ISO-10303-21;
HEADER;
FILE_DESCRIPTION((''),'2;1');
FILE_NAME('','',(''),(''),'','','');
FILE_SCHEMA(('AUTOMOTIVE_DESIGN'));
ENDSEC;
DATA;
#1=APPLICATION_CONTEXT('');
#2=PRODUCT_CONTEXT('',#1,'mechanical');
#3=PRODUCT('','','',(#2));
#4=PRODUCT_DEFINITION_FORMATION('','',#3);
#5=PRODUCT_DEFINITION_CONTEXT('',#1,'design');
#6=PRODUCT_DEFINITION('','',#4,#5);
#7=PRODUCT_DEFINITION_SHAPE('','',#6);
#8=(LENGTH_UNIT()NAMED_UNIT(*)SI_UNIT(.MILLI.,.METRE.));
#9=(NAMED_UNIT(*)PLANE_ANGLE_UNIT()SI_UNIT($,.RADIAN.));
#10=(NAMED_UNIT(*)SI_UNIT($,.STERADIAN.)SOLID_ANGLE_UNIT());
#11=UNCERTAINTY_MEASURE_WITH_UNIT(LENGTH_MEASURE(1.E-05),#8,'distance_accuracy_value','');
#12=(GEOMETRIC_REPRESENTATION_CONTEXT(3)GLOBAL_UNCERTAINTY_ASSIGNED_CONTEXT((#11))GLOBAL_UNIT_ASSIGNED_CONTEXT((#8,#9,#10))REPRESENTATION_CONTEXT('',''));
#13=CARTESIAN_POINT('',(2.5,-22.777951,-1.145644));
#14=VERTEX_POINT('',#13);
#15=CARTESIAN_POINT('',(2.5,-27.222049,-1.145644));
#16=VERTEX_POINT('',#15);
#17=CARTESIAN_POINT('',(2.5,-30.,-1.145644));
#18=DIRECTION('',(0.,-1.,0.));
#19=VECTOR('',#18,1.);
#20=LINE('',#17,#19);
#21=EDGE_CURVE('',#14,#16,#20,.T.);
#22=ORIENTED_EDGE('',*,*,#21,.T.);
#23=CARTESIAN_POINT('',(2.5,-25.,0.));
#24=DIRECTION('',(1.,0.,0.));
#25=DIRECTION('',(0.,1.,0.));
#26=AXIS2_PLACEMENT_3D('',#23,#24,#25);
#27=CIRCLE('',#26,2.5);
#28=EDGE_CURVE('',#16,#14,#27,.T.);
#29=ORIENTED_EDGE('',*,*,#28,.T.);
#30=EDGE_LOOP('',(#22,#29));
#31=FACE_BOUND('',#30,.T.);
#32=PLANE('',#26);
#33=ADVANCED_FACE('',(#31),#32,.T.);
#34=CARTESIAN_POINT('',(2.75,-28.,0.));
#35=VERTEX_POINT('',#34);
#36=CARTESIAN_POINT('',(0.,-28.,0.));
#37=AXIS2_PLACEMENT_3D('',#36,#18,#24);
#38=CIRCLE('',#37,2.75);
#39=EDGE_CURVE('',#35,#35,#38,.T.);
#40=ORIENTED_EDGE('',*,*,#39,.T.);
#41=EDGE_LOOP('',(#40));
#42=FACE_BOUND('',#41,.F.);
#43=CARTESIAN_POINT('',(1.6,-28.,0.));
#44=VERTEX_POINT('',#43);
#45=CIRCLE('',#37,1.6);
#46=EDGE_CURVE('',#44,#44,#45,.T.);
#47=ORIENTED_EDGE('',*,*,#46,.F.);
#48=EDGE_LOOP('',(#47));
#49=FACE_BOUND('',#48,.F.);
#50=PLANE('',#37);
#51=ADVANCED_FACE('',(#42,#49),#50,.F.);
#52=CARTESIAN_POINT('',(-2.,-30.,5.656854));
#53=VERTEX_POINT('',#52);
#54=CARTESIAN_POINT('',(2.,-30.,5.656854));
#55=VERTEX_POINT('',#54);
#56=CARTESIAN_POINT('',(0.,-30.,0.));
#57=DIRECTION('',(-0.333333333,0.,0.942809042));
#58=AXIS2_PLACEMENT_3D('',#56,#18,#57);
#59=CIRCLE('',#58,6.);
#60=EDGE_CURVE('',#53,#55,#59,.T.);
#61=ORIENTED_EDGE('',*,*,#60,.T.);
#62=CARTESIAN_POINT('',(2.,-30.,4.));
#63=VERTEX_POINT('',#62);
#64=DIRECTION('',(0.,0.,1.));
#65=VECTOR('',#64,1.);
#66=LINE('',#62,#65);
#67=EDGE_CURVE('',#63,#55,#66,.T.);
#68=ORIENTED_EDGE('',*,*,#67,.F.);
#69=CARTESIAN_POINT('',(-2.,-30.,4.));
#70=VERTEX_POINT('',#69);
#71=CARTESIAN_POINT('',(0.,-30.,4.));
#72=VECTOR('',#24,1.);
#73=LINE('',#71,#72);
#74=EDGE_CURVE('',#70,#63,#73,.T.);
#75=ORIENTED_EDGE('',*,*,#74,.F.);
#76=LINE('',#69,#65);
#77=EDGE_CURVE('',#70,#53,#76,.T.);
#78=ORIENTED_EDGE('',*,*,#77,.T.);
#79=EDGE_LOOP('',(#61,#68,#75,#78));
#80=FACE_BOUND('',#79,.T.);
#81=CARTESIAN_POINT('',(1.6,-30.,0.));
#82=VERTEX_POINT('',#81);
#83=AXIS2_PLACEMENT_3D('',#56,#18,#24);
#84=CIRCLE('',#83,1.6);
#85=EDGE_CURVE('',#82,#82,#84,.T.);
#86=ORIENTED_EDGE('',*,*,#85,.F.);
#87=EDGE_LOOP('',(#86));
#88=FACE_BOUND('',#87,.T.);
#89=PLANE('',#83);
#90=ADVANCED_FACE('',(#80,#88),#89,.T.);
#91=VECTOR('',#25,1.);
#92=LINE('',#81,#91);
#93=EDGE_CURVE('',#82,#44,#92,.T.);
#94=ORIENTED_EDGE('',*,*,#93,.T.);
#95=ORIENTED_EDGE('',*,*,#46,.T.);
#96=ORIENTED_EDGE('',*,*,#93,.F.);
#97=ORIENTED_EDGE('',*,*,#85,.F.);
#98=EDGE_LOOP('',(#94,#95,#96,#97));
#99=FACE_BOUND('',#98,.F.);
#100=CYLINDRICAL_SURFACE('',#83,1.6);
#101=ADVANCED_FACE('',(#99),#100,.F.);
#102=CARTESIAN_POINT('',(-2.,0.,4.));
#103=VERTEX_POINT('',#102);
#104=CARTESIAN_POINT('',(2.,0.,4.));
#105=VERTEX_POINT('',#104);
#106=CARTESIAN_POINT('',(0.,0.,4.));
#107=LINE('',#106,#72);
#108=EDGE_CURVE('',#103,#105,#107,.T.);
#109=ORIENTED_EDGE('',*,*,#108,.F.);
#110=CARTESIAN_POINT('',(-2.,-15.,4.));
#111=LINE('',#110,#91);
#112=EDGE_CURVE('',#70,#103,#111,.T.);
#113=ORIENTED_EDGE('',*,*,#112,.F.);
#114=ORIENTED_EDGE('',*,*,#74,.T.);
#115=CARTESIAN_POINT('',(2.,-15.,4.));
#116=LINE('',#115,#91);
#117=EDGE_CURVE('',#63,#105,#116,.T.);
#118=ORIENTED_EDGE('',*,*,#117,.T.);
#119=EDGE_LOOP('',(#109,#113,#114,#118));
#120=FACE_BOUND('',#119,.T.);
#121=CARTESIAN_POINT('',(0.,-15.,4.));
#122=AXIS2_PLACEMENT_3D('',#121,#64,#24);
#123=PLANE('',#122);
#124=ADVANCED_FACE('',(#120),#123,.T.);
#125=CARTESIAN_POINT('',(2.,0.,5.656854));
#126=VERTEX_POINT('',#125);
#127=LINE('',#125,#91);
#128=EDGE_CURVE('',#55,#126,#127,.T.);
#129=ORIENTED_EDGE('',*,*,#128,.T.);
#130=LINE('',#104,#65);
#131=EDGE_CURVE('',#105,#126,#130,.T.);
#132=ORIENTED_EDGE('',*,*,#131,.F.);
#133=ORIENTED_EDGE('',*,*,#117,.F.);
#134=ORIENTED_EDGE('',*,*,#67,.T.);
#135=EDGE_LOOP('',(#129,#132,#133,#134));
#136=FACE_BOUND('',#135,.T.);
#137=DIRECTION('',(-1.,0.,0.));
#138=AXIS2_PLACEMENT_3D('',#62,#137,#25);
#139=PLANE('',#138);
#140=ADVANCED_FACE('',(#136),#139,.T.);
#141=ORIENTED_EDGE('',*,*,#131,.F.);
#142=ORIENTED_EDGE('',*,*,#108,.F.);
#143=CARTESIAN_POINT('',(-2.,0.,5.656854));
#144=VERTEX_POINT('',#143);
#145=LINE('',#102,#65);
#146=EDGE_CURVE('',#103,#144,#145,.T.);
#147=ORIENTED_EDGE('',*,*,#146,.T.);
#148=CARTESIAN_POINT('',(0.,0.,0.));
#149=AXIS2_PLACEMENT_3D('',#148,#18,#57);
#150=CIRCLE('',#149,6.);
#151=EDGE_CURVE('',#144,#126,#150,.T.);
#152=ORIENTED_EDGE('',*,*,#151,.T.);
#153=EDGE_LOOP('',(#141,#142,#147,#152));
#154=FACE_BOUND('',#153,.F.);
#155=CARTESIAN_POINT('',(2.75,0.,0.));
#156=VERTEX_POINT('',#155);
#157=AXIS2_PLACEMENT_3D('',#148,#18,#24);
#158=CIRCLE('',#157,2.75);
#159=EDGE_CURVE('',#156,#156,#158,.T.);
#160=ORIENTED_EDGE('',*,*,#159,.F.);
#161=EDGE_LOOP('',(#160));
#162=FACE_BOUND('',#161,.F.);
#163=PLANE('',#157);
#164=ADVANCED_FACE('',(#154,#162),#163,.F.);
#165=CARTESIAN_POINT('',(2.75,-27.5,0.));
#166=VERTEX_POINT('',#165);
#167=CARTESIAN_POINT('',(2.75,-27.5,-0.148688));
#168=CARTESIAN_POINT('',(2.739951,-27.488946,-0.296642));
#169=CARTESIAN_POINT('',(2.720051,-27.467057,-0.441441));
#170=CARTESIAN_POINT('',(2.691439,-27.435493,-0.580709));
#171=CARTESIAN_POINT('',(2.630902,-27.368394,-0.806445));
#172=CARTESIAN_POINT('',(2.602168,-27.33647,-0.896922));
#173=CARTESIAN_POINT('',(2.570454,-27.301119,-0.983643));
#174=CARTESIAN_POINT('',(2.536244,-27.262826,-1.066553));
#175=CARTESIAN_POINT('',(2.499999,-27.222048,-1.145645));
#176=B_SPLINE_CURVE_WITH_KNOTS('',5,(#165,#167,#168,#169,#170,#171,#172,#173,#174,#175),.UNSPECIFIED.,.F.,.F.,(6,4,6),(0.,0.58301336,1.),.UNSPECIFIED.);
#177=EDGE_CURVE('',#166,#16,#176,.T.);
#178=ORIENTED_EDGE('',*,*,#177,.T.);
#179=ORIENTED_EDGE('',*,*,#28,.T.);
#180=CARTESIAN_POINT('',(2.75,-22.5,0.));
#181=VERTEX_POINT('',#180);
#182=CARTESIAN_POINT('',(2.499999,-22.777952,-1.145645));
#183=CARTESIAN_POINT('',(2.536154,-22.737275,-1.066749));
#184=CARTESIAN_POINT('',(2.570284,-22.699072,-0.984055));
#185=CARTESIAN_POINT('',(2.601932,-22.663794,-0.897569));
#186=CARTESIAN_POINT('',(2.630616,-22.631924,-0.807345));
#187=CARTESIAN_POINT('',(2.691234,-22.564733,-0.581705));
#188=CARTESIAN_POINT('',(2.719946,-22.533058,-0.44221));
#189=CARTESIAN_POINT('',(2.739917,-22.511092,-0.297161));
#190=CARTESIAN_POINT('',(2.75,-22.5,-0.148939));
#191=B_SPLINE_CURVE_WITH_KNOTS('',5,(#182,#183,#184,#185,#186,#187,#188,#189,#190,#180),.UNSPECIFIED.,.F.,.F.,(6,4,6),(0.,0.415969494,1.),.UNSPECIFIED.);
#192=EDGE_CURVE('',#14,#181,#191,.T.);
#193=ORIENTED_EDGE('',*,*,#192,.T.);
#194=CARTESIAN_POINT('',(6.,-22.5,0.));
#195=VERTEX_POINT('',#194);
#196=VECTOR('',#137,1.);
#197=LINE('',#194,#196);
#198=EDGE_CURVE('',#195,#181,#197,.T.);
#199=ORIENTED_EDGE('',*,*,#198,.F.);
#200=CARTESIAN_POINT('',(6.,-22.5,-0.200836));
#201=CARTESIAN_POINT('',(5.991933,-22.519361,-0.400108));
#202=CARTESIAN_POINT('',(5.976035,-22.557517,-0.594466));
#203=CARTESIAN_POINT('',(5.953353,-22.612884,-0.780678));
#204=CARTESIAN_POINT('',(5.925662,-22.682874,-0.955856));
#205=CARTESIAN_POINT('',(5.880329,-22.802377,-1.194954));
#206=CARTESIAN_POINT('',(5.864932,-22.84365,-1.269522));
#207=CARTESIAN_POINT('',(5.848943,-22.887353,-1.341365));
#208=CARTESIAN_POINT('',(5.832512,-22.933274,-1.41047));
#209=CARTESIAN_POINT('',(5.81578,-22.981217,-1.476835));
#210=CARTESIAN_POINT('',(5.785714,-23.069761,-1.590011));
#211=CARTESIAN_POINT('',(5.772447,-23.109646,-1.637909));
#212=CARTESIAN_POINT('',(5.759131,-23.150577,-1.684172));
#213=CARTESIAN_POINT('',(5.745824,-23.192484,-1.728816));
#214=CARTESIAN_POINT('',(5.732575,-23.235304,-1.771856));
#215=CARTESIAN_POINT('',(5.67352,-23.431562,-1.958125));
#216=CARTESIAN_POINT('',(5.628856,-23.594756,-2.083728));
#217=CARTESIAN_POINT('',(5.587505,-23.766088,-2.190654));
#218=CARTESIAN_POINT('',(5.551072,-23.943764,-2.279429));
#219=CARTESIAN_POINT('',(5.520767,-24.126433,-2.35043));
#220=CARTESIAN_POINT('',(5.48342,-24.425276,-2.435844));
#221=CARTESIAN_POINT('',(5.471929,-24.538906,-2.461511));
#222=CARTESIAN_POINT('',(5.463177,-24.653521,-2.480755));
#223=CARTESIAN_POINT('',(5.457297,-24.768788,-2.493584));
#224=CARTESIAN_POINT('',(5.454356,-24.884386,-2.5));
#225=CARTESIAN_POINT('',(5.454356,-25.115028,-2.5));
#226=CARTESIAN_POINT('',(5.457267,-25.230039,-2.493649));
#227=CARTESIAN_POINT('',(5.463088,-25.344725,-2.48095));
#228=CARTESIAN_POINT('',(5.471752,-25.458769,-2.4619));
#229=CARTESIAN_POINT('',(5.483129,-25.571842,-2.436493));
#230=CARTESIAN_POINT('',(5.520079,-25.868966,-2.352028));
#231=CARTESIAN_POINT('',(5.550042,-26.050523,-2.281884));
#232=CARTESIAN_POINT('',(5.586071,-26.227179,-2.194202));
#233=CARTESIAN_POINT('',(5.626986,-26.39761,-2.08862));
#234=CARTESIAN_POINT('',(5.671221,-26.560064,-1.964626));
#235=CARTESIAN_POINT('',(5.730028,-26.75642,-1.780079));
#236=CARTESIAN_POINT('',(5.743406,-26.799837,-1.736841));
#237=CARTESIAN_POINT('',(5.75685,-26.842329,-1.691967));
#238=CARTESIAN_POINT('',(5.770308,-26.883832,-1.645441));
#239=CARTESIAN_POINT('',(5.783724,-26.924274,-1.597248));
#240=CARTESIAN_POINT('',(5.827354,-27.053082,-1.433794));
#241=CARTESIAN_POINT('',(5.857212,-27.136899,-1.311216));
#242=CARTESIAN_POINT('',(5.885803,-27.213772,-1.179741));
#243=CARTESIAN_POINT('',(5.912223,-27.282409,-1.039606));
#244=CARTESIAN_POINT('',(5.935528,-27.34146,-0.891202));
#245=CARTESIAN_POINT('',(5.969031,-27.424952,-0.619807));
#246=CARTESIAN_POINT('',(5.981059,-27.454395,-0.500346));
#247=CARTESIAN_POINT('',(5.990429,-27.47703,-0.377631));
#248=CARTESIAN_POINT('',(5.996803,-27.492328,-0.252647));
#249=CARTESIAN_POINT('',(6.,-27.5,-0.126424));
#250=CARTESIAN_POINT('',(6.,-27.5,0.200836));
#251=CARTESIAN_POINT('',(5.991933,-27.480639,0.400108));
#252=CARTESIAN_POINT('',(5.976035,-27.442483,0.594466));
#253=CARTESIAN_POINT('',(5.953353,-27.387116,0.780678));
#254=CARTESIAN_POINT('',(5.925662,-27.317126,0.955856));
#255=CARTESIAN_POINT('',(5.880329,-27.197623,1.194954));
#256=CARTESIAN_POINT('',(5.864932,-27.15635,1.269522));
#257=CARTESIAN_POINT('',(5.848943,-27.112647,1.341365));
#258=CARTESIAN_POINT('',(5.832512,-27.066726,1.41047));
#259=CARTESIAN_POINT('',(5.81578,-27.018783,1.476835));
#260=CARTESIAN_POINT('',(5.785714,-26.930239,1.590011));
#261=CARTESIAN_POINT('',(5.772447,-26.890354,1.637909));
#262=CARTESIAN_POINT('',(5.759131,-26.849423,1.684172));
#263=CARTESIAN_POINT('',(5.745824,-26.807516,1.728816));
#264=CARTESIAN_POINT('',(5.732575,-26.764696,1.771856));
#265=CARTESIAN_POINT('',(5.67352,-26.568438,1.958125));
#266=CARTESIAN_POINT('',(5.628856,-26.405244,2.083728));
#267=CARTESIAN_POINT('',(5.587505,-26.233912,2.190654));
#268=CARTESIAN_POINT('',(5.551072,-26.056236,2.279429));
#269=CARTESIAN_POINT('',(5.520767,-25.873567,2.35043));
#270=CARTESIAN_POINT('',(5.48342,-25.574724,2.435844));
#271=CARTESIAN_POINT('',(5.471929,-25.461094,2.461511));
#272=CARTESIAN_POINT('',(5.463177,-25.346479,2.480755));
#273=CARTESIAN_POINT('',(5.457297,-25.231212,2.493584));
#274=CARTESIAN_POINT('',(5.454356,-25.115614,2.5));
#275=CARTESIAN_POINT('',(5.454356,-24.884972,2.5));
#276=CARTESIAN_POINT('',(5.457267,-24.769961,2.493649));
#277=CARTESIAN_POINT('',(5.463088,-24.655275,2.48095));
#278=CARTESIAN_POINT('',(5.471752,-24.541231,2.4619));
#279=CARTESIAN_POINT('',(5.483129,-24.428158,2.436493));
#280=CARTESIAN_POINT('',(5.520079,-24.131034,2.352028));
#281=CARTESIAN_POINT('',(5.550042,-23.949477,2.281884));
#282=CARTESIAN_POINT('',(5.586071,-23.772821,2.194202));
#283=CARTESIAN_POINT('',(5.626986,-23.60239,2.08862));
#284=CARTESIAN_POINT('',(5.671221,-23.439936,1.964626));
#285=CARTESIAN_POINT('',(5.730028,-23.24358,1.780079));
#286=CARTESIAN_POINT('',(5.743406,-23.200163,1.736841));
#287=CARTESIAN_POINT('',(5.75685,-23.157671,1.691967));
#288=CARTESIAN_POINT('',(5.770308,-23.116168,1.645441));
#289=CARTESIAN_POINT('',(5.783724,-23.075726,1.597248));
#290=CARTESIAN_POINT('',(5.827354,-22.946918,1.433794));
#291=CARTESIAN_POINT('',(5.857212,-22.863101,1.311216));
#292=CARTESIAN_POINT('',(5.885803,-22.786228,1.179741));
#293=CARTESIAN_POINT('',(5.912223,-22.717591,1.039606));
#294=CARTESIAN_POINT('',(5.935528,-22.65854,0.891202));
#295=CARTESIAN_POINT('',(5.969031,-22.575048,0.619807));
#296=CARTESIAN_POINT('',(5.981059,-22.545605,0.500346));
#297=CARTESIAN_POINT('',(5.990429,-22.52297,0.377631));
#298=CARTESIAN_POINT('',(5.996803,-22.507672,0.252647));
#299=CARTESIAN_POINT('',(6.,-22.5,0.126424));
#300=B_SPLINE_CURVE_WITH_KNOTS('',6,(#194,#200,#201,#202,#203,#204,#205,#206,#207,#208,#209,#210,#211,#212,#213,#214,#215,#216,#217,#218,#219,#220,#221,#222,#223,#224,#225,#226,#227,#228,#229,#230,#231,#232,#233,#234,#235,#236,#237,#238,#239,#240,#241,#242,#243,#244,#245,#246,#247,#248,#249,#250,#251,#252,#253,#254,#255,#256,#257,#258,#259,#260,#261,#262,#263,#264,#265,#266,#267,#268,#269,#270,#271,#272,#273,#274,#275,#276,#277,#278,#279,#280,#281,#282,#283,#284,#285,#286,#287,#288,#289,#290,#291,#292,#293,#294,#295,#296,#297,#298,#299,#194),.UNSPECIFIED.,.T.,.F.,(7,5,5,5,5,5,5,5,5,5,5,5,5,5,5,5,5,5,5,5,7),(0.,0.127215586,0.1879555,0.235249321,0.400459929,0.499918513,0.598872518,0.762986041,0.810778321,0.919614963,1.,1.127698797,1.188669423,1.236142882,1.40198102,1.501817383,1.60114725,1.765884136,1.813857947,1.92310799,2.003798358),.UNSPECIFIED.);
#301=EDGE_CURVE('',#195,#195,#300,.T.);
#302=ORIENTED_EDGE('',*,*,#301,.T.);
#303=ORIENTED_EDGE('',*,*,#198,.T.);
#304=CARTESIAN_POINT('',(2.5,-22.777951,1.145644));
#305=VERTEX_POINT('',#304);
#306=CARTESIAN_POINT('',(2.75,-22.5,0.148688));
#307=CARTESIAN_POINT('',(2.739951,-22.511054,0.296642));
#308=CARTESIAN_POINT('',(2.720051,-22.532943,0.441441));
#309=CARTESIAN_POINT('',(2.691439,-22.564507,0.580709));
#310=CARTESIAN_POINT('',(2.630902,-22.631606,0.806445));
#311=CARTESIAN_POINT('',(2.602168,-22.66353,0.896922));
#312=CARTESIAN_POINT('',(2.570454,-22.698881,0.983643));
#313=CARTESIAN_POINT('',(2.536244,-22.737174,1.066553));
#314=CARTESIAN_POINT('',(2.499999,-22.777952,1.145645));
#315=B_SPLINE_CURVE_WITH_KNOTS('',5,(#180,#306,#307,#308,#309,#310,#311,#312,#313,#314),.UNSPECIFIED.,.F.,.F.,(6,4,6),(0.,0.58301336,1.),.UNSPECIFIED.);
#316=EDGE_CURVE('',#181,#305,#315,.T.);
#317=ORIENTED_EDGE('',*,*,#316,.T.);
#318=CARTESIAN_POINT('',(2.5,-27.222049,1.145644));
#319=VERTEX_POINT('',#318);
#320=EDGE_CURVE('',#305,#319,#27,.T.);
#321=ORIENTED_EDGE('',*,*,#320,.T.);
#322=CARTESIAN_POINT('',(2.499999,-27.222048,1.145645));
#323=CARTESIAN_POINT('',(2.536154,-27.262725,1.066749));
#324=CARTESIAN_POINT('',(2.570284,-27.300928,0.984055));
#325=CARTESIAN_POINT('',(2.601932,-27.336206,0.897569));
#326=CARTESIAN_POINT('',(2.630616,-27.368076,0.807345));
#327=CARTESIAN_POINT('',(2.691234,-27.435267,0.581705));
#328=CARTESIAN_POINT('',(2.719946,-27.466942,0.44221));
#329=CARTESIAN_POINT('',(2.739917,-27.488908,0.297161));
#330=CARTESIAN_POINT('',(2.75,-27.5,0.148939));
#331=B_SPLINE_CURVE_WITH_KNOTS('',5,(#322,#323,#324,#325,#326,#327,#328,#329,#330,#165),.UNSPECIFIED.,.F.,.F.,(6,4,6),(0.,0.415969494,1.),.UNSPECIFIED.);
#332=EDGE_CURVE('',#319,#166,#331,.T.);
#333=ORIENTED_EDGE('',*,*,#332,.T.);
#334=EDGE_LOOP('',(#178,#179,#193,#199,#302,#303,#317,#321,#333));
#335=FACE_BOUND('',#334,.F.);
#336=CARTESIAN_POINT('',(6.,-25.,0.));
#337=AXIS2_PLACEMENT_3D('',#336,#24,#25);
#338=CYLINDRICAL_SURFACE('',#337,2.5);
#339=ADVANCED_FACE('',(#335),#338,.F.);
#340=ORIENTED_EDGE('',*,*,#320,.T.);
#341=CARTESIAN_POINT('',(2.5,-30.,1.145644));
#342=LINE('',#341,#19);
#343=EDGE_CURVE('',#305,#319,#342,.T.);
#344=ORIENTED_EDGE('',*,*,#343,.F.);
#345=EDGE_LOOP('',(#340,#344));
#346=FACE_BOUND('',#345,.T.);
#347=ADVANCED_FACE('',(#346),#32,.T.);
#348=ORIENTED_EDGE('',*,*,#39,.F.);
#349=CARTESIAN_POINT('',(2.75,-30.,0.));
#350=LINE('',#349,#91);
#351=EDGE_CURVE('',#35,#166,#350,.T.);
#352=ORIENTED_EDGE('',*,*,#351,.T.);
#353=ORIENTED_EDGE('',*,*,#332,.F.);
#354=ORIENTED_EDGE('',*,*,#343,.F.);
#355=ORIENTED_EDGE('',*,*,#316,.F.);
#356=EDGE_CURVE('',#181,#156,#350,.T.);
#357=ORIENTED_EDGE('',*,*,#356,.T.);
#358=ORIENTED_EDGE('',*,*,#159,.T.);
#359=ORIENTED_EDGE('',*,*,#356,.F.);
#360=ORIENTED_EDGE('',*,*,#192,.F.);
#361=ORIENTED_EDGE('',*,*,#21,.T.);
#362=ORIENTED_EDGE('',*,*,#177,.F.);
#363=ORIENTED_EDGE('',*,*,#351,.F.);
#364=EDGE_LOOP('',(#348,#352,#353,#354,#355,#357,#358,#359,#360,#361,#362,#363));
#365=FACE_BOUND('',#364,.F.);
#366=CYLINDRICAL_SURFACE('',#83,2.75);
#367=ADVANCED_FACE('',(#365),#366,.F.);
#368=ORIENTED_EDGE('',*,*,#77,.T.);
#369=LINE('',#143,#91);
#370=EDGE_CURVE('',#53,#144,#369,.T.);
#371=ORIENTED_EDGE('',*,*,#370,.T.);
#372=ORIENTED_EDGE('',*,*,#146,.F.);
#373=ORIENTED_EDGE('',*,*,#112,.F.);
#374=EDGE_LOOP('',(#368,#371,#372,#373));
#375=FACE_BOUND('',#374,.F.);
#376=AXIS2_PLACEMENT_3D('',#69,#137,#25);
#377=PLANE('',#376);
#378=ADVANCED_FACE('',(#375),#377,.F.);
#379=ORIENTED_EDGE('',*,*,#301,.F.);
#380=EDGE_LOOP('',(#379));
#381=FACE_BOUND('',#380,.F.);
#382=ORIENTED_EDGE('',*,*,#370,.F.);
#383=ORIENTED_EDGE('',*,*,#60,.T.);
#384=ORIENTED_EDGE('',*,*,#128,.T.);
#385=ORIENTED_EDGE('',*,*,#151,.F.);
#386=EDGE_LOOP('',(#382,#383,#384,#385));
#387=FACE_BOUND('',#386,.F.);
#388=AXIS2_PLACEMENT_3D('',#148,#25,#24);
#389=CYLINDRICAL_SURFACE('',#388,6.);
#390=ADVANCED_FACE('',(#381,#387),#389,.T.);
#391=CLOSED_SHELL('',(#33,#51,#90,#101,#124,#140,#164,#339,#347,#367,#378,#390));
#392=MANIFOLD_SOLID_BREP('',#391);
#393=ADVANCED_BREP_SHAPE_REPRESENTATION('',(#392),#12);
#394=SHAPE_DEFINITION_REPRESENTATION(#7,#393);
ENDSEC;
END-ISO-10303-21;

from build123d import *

# Parameters (mm, degrees)
F0_R      = 6
F1_DEPTH  = 30
F2_R      = 2.75
F3_DEPTH  = 30.001
F8_R      = 5
F8_R_2    = 1.6
F9_DEPTH  = 2
F12_W     = 4
F12_H     = 30
F13_DEPTH = 3
F14_R     = 2.5
F15_DEPTH = 3.5


with BuildPart() as f1:
    # F0 (on Front) → F1 (new body)
    with BuildSketch(Plane.XZ):
        Circle(F0_R)
    extrude(amount=F1_DEPTH)

    # F2 (on face) → F3 (cut, through all)
    with BuildSketch(Plane.XZ.offset(30)):
        Circle(F2_R)
    extrude(amount=-F3_DEPTH, mode=Mode.SUBTRACT)

    # F8 (on face) → F9 (join)
    with BuildSketch(Plane.XZ.offset(30)):
        Circle(F8_R)
        Circle(F8_R_2, mode=Mode.SUBTRACT)
    extrude(amount=-F9_DEPTH)

    # F12 (on offset) → F13 (cut)
    with BuildSketch(Plane.XY.offset(4)):
        with Locations((0, -15)):
            Rectangle(F12_W, F12_H)
    extrude(amount=F13_DEPTH, mode=Mode.SUBTRACT)

    # F14 (on offset) → F15 (cut)
    with BuildSketch(Plane.YZ.offset(6)):
        with Locations((-25, 0)):
            Circle(F14_R)
    extrude(amount=-F15_DEPTH, mode=Mode.SUBTRACT)


solid = f1.part
